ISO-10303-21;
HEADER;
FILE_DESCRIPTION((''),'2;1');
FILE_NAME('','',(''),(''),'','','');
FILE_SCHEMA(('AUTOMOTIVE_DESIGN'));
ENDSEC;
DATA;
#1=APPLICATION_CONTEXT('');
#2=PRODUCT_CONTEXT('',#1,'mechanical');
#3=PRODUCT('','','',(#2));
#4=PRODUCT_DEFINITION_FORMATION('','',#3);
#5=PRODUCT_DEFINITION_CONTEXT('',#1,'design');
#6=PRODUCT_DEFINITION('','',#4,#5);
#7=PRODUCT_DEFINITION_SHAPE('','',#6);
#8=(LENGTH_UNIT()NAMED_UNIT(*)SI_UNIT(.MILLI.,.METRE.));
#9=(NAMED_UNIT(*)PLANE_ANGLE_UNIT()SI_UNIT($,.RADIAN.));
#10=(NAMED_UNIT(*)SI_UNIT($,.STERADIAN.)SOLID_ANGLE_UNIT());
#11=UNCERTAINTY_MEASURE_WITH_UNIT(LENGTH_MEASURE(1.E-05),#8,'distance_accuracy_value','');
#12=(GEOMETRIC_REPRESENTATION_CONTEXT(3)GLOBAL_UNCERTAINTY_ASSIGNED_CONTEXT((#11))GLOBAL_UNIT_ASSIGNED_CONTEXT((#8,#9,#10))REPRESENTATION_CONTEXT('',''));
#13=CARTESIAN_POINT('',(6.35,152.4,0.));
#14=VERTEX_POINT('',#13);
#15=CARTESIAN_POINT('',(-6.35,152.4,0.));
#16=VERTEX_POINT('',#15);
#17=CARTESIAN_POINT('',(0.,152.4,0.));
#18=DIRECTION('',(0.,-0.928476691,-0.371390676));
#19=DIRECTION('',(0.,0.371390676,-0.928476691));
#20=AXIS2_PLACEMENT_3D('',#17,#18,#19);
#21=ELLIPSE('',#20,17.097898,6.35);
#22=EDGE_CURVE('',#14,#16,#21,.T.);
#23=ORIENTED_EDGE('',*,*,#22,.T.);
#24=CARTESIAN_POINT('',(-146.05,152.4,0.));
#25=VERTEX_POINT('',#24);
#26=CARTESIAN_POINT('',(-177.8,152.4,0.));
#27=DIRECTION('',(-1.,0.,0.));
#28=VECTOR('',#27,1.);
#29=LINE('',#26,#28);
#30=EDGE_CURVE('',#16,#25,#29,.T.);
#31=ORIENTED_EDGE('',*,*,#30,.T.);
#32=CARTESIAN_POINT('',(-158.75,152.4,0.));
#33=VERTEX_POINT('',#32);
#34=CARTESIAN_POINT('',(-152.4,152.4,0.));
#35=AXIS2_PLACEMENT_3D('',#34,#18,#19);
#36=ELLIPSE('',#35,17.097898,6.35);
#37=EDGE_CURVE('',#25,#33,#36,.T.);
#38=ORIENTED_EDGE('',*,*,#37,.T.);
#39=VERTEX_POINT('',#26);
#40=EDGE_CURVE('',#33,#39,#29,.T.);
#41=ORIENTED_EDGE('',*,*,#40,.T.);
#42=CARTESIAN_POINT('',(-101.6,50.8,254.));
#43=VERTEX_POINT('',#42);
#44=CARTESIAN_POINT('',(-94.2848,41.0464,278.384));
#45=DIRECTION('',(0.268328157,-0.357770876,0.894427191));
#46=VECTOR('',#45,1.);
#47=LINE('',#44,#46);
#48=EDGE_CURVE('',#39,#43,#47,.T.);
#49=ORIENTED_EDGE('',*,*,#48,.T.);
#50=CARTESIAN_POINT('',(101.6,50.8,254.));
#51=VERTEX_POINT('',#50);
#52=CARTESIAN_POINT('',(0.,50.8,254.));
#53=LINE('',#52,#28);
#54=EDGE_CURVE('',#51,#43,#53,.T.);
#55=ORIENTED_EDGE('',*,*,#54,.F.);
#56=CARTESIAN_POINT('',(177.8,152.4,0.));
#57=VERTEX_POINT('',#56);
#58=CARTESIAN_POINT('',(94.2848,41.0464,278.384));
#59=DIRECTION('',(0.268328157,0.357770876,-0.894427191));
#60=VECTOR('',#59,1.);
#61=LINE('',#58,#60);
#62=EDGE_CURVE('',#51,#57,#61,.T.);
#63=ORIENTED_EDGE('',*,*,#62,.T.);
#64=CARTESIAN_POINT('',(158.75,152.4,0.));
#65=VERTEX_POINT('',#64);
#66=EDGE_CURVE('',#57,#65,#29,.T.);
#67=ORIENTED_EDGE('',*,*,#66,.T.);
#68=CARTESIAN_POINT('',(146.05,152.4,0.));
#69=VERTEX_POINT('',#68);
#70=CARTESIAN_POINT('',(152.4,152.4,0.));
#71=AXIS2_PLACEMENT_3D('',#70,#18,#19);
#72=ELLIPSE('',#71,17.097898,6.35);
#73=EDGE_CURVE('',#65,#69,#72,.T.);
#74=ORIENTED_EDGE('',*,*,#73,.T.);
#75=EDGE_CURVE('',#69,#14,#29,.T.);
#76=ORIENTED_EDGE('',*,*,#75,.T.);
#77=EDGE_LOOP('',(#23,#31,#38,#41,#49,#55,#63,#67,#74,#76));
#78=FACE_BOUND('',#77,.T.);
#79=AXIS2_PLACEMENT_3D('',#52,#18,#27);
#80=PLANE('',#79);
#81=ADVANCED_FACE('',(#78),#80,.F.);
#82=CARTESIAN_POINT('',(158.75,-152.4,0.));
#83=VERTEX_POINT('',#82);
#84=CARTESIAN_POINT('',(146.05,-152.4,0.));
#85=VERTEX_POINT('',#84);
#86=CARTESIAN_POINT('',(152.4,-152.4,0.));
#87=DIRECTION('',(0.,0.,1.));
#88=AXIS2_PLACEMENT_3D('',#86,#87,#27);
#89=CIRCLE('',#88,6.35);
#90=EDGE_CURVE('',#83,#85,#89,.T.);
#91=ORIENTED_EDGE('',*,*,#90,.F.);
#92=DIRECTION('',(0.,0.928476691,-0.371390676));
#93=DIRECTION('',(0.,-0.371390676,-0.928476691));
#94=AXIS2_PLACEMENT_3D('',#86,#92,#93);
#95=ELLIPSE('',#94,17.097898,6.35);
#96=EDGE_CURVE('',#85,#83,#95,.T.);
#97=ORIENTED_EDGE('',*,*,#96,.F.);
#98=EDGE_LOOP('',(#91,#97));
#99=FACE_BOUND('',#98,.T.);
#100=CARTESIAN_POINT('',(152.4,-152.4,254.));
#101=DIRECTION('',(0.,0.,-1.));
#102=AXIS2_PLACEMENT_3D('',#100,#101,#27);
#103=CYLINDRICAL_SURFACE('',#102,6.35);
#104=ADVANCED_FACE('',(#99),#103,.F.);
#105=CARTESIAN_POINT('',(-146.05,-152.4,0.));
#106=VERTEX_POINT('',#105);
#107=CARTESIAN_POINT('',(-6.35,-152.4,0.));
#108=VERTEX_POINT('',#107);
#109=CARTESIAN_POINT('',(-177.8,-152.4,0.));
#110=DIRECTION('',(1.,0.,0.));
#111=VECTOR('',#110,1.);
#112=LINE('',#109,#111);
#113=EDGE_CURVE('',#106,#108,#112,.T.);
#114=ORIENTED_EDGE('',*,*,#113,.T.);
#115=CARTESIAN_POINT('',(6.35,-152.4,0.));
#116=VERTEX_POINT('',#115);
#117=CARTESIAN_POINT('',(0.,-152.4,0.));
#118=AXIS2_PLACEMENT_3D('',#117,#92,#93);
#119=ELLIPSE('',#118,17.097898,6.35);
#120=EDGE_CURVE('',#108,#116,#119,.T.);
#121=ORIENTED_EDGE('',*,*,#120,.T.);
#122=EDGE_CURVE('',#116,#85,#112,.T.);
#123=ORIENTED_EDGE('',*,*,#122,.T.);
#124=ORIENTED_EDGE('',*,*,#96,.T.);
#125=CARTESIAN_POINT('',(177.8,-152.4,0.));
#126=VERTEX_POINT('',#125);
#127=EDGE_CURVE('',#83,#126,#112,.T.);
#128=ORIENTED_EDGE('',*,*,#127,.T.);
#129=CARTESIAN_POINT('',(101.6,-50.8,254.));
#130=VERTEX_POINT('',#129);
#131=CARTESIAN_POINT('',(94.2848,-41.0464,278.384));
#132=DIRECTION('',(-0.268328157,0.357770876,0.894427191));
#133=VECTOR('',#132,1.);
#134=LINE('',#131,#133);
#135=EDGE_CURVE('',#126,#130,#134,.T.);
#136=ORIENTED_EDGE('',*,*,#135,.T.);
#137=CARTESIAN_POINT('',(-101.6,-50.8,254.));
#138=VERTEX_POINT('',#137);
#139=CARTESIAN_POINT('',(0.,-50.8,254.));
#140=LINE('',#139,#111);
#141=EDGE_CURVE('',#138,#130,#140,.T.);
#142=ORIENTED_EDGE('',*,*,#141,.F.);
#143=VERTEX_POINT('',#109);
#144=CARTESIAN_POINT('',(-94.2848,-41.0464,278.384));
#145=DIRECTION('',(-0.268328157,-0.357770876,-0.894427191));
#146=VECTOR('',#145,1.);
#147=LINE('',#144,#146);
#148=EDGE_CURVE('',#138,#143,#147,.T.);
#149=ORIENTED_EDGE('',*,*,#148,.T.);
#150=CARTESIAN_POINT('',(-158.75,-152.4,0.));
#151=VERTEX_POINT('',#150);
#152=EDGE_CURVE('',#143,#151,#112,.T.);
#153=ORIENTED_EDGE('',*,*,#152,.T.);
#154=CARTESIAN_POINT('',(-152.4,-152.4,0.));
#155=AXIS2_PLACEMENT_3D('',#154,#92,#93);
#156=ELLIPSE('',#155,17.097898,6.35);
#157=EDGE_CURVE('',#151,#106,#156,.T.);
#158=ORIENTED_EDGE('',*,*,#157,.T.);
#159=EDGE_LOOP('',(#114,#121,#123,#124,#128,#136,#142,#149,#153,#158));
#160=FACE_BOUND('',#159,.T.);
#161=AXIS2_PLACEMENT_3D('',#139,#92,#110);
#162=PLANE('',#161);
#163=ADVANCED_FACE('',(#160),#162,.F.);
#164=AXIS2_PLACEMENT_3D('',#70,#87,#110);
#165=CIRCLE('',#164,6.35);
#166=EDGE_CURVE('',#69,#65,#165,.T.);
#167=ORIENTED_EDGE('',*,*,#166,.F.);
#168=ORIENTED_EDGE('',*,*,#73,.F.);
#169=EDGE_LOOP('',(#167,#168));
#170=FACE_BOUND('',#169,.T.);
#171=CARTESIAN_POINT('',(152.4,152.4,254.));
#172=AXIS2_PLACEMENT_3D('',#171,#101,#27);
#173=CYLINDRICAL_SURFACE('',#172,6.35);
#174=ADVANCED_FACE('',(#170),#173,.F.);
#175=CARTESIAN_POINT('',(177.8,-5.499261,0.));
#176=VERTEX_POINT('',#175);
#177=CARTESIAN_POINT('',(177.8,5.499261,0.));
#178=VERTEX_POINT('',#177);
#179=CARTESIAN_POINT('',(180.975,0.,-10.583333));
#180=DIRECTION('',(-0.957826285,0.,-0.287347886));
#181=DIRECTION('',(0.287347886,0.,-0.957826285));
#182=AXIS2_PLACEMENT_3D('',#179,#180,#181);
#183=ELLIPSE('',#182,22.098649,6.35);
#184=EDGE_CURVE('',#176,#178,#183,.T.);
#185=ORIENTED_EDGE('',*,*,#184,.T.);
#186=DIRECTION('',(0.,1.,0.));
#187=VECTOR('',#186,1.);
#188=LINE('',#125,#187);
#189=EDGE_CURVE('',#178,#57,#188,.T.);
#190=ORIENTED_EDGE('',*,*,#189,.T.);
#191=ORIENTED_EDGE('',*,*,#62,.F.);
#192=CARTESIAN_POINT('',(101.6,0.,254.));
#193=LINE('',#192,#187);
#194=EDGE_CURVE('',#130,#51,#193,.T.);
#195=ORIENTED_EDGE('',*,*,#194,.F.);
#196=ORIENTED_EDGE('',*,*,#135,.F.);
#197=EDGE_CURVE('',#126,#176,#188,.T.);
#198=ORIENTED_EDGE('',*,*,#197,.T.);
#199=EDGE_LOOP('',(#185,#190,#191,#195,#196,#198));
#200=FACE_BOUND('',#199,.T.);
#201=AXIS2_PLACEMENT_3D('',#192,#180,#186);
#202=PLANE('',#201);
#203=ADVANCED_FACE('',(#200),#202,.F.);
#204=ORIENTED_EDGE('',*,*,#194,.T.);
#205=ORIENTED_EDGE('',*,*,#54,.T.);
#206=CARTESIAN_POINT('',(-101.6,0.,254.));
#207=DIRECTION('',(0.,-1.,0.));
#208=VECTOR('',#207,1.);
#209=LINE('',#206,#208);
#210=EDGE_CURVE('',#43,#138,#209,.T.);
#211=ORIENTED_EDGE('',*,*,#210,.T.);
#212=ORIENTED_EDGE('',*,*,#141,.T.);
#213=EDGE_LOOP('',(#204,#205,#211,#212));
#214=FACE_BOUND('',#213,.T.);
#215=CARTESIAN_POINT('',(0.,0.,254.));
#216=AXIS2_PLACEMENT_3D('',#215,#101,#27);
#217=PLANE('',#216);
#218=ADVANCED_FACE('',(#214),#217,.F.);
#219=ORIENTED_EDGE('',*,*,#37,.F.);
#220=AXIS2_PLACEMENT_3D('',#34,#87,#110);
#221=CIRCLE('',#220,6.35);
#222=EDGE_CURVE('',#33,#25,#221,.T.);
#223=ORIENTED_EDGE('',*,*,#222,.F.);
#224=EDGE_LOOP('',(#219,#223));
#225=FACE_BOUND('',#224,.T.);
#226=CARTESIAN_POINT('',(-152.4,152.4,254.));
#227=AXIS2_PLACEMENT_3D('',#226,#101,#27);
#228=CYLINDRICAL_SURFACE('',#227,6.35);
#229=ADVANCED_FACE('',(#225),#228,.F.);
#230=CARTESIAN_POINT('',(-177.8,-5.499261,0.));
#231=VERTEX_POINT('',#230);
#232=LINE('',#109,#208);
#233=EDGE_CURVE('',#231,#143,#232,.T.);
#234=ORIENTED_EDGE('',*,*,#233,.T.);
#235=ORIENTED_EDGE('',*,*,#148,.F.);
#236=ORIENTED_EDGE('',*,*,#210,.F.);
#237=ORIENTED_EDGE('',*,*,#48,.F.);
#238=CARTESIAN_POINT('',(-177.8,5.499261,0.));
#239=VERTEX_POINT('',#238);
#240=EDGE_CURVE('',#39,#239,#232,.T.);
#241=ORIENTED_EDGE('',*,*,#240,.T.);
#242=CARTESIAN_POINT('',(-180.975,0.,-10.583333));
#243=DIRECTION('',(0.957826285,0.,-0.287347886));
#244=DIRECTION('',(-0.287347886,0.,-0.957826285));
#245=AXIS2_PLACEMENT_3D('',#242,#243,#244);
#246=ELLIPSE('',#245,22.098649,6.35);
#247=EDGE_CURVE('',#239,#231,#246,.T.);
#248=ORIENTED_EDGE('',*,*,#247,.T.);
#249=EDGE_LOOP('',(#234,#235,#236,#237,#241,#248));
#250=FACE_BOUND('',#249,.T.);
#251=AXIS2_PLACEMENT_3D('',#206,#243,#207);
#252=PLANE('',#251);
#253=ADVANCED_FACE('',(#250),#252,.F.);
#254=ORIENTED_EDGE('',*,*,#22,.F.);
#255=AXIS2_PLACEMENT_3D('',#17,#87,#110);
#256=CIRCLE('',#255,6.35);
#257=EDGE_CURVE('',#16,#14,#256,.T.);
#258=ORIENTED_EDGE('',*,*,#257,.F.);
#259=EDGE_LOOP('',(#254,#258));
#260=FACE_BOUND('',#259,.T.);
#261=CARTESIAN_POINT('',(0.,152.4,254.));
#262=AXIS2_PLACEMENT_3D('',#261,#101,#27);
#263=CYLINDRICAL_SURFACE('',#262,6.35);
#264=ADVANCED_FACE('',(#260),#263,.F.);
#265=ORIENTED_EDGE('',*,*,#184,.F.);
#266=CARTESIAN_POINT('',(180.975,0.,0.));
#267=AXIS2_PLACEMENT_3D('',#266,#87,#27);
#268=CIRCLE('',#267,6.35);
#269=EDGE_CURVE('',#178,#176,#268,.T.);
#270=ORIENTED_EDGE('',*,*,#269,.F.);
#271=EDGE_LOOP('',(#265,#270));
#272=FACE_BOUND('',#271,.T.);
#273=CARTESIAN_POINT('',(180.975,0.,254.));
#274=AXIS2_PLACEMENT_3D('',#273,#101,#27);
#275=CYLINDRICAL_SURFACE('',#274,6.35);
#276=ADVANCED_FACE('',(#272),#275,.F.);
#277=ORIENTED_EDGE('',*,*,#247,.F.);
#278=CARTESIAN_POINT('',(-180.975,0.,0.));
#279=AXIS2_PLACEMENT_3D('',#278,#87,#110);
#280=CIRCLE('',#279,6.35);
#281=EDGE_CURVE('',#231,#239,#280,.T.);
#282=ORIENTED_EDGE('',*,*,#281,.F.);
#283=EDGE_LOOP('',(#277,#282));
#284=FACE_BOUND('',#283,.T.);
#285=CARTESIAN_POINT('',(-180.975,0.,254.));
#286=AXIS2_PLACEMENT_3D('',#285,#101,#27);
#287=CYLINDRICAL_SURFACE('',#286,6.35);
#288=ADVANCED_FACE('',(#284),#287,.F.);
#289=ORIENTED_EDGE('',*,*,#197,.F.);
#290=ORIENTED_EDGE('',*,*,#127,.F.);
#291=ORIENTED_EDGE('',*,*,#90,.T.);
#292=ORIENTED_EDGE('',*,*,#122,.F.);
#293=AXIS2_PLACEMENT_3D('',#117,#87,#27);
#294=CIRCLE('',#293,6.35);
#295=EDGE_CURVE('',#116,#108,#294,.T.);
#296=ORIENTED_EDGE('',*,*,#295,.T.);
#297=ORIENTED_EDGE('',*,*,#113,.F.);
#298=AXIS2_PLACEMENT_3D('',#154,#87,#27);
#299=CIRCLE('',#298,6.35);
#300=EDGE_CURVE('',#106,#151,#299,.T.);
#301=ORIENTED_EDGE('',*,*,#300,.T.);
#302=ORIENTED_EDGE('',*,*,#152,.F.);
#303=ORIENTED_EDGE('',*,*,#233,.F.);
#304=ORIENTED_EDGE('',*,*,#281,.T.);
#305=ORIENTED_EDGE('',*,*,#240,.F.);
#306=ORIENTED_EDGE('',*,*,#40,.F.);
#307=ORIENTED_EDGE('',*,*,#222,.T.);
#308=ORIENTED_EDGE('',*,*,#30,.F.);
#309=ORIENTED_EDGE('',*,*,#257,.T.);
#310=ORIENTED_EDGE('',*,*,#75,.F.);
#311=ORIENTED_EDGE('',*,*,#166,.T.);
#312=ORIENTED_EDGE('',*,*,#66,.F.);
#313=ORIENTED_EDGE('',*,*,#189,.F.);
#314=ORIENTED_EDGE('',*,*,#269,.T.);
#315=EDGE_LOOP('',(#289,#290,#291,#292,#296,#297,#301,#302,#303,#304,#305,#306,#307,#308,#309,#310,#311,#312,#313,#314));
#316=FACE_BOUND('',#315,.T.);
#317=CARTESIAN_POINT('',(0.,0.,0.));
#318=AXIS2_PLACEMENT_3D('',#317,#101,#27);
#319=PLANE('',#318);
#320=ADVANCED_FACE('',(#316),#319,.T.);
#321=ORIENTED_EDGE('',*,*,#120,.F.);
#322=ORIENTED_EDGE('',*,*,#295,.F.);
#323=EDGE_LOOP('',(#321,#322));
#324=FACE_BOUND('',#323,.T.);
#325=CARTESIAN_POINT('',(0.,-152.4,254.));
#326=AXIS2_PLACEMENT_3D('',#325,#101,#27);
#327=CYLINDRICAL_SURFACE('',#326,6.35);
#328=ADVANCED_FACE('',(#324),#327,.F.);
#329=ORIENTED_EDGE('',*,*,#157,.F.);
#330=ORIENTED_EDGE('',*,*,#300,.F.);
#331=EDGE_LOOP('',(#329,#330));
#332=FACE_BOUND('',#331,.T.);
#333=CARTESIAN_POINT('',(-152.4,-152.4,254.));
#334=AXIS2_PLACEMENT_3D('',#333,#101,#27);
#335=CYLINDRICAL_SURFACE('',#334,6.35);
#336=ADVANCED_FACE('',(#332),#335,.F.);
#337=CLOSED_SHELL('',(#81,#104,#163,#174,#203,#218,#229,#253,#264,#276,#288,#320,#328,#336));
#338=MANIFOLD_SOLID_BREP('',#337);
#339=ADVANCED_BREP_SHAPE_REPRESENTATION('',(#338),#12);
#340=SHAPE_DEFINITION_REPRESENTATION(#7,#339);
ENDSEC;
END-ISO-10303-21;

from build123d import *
from OCP.BRepFilletAPI import BRepFilletAPI_MakeChamfer

# Parameters (mm, degrees)
SKETCH1_W           = 355.6
SKETCH1_H           = 304.8
BOSS_EXTRUDE1_DEPTH = 254
CHAMFER1_SIZE       = 254
CHAMFER1_SIZE_2     = 101.6
CHAMFER2_SIZE       = 254
CHAMFER2_SIZE_2     = 76.2
SKETCH2_R           = 6.35
CUT_EXTRUDE1_DEPTH  = 346.477350922


with BuildPart() as part:
    # Sketch1 → Boss-Extrude1 (new body)
    with BuildSketch(Plane.XY):
        Rectangle(SKETCH1_W, SKETCH1_H)
    extrude(amount=BOSS_EXTRUDE1_DEPTH)

    # Chamfer1
    chamfer1_edges_1 = [part.edges().sort_by_distance(p)[0] for p in [
        (0, -152.4, 254),
    ]]
    chamfer1_side_1 = [part.faces().sort_by_distance(p)[0] for p in [
        (0, -152.4, 251.968),
    ]]
    chamfer1_edges_2 = [part.edges().sort_by_distance(p)[0] for p in [
        (0, 152.4, 254),
    ]]
    chamfer1_side_2 = [part.faces().sort_by_distance(p)[0] for p in [
        (0, 152.4, 251.968),
    ]]
    chamfer1 = BRepFilletAPI_MakeChamfer(part.part.solid().wrapped)
    for e in chamfer1_edges_1:
        chamfer1.Add(CHAMFER1_SIZE - 0.0001, CHAMFER1_SIZE_2 - 0.0001, e.wrapped, chamfer1_side_1[0].wrapped)
    for e in chamfer1_edges_2:
        chamfer1.Add(CHAMFER1_SIZE - 0.0001, CHAMFER1_SIZE_2 - 0.0001, e.wrapped, chamfer1_side_2[0].wrapped)
    add(Compound.cast(chamfer1.Shape()), mode=Mode.REPLACE)  # a hair under: the kernel refuses the full size

    # Chamfer2
    chamfer2_edges_1 = [part.edges().sort_by_distance(p)[0] for p in [
        (177.8, 0, 254),
    ]]
    chamfer2_side_1 = [part.faces().sort_by_distance(p)[0] for p in [
        (177.8, 0, 252.476),
    ]]
    chamfer2_edges_2 = [part.edges().sort_by_distance(p)[0] for p in [
        (-177.8, 0, 254),
    ]]
    chamfer2_side_2 = [part.faces().sort_by_distance(p)[0] for p in [
        (-177.8, 0, 252.476),
    ]]
    chamfer2 = BRepFilletAPI_MakeChamfer(part.part.solid().wrapped)
    for e in chamfer2_edges_1:
        chamfer2.Add(CHAMFER2_SIZE - 0.0001, CHAMFER2_SIZE_2 - 0.0001, e.wrapped, chamfer2_side_1[0].wrapped)
    for e in chamfer2_edges_2:
        chamfer2.Add(CHAMFER2_SIZE - 0.0001, CHAMFER2_SIZE_2 - 0.0001, e.wrapped, chamfer2_side_2[0].wrapped)
    add(Compound.cast(chamfer2.Shape()), mode=Mode.REPLACE)  # a hair under: the kernel refuses the full size

    # Sketch2 → Cut-Extrude1 (cut, through all)
    with BuildSketch(Plane.XY):
        with Locations((-180.975, 0)):
            Circle(SKETCH2_R)
        with Locations((0, 152.4)):
            Circle(SKETCH2_R)
        with Locations((152.4, 152.4)):
            Circle(SKETCH2_R)
        with Locations((-152.4, 152.4)):
            Circle(SKETCH2_R)
        with Locations((180.975, 0)):
            Circle(SKETCH2_R)
        with Locations((152.4, -152.4)):
            Circle(SKETCH2_R)
        with Locations((0, -152.4)):
            Circle(SKETCH2_R)
        with Locations((-152.4, -152.4)):
            Circle(SKETCH2_R)
    extrude(amount=CUT_EXTRUDE1_DEPTH, mode=Mode.SUBTRACT)


solid = part.part
